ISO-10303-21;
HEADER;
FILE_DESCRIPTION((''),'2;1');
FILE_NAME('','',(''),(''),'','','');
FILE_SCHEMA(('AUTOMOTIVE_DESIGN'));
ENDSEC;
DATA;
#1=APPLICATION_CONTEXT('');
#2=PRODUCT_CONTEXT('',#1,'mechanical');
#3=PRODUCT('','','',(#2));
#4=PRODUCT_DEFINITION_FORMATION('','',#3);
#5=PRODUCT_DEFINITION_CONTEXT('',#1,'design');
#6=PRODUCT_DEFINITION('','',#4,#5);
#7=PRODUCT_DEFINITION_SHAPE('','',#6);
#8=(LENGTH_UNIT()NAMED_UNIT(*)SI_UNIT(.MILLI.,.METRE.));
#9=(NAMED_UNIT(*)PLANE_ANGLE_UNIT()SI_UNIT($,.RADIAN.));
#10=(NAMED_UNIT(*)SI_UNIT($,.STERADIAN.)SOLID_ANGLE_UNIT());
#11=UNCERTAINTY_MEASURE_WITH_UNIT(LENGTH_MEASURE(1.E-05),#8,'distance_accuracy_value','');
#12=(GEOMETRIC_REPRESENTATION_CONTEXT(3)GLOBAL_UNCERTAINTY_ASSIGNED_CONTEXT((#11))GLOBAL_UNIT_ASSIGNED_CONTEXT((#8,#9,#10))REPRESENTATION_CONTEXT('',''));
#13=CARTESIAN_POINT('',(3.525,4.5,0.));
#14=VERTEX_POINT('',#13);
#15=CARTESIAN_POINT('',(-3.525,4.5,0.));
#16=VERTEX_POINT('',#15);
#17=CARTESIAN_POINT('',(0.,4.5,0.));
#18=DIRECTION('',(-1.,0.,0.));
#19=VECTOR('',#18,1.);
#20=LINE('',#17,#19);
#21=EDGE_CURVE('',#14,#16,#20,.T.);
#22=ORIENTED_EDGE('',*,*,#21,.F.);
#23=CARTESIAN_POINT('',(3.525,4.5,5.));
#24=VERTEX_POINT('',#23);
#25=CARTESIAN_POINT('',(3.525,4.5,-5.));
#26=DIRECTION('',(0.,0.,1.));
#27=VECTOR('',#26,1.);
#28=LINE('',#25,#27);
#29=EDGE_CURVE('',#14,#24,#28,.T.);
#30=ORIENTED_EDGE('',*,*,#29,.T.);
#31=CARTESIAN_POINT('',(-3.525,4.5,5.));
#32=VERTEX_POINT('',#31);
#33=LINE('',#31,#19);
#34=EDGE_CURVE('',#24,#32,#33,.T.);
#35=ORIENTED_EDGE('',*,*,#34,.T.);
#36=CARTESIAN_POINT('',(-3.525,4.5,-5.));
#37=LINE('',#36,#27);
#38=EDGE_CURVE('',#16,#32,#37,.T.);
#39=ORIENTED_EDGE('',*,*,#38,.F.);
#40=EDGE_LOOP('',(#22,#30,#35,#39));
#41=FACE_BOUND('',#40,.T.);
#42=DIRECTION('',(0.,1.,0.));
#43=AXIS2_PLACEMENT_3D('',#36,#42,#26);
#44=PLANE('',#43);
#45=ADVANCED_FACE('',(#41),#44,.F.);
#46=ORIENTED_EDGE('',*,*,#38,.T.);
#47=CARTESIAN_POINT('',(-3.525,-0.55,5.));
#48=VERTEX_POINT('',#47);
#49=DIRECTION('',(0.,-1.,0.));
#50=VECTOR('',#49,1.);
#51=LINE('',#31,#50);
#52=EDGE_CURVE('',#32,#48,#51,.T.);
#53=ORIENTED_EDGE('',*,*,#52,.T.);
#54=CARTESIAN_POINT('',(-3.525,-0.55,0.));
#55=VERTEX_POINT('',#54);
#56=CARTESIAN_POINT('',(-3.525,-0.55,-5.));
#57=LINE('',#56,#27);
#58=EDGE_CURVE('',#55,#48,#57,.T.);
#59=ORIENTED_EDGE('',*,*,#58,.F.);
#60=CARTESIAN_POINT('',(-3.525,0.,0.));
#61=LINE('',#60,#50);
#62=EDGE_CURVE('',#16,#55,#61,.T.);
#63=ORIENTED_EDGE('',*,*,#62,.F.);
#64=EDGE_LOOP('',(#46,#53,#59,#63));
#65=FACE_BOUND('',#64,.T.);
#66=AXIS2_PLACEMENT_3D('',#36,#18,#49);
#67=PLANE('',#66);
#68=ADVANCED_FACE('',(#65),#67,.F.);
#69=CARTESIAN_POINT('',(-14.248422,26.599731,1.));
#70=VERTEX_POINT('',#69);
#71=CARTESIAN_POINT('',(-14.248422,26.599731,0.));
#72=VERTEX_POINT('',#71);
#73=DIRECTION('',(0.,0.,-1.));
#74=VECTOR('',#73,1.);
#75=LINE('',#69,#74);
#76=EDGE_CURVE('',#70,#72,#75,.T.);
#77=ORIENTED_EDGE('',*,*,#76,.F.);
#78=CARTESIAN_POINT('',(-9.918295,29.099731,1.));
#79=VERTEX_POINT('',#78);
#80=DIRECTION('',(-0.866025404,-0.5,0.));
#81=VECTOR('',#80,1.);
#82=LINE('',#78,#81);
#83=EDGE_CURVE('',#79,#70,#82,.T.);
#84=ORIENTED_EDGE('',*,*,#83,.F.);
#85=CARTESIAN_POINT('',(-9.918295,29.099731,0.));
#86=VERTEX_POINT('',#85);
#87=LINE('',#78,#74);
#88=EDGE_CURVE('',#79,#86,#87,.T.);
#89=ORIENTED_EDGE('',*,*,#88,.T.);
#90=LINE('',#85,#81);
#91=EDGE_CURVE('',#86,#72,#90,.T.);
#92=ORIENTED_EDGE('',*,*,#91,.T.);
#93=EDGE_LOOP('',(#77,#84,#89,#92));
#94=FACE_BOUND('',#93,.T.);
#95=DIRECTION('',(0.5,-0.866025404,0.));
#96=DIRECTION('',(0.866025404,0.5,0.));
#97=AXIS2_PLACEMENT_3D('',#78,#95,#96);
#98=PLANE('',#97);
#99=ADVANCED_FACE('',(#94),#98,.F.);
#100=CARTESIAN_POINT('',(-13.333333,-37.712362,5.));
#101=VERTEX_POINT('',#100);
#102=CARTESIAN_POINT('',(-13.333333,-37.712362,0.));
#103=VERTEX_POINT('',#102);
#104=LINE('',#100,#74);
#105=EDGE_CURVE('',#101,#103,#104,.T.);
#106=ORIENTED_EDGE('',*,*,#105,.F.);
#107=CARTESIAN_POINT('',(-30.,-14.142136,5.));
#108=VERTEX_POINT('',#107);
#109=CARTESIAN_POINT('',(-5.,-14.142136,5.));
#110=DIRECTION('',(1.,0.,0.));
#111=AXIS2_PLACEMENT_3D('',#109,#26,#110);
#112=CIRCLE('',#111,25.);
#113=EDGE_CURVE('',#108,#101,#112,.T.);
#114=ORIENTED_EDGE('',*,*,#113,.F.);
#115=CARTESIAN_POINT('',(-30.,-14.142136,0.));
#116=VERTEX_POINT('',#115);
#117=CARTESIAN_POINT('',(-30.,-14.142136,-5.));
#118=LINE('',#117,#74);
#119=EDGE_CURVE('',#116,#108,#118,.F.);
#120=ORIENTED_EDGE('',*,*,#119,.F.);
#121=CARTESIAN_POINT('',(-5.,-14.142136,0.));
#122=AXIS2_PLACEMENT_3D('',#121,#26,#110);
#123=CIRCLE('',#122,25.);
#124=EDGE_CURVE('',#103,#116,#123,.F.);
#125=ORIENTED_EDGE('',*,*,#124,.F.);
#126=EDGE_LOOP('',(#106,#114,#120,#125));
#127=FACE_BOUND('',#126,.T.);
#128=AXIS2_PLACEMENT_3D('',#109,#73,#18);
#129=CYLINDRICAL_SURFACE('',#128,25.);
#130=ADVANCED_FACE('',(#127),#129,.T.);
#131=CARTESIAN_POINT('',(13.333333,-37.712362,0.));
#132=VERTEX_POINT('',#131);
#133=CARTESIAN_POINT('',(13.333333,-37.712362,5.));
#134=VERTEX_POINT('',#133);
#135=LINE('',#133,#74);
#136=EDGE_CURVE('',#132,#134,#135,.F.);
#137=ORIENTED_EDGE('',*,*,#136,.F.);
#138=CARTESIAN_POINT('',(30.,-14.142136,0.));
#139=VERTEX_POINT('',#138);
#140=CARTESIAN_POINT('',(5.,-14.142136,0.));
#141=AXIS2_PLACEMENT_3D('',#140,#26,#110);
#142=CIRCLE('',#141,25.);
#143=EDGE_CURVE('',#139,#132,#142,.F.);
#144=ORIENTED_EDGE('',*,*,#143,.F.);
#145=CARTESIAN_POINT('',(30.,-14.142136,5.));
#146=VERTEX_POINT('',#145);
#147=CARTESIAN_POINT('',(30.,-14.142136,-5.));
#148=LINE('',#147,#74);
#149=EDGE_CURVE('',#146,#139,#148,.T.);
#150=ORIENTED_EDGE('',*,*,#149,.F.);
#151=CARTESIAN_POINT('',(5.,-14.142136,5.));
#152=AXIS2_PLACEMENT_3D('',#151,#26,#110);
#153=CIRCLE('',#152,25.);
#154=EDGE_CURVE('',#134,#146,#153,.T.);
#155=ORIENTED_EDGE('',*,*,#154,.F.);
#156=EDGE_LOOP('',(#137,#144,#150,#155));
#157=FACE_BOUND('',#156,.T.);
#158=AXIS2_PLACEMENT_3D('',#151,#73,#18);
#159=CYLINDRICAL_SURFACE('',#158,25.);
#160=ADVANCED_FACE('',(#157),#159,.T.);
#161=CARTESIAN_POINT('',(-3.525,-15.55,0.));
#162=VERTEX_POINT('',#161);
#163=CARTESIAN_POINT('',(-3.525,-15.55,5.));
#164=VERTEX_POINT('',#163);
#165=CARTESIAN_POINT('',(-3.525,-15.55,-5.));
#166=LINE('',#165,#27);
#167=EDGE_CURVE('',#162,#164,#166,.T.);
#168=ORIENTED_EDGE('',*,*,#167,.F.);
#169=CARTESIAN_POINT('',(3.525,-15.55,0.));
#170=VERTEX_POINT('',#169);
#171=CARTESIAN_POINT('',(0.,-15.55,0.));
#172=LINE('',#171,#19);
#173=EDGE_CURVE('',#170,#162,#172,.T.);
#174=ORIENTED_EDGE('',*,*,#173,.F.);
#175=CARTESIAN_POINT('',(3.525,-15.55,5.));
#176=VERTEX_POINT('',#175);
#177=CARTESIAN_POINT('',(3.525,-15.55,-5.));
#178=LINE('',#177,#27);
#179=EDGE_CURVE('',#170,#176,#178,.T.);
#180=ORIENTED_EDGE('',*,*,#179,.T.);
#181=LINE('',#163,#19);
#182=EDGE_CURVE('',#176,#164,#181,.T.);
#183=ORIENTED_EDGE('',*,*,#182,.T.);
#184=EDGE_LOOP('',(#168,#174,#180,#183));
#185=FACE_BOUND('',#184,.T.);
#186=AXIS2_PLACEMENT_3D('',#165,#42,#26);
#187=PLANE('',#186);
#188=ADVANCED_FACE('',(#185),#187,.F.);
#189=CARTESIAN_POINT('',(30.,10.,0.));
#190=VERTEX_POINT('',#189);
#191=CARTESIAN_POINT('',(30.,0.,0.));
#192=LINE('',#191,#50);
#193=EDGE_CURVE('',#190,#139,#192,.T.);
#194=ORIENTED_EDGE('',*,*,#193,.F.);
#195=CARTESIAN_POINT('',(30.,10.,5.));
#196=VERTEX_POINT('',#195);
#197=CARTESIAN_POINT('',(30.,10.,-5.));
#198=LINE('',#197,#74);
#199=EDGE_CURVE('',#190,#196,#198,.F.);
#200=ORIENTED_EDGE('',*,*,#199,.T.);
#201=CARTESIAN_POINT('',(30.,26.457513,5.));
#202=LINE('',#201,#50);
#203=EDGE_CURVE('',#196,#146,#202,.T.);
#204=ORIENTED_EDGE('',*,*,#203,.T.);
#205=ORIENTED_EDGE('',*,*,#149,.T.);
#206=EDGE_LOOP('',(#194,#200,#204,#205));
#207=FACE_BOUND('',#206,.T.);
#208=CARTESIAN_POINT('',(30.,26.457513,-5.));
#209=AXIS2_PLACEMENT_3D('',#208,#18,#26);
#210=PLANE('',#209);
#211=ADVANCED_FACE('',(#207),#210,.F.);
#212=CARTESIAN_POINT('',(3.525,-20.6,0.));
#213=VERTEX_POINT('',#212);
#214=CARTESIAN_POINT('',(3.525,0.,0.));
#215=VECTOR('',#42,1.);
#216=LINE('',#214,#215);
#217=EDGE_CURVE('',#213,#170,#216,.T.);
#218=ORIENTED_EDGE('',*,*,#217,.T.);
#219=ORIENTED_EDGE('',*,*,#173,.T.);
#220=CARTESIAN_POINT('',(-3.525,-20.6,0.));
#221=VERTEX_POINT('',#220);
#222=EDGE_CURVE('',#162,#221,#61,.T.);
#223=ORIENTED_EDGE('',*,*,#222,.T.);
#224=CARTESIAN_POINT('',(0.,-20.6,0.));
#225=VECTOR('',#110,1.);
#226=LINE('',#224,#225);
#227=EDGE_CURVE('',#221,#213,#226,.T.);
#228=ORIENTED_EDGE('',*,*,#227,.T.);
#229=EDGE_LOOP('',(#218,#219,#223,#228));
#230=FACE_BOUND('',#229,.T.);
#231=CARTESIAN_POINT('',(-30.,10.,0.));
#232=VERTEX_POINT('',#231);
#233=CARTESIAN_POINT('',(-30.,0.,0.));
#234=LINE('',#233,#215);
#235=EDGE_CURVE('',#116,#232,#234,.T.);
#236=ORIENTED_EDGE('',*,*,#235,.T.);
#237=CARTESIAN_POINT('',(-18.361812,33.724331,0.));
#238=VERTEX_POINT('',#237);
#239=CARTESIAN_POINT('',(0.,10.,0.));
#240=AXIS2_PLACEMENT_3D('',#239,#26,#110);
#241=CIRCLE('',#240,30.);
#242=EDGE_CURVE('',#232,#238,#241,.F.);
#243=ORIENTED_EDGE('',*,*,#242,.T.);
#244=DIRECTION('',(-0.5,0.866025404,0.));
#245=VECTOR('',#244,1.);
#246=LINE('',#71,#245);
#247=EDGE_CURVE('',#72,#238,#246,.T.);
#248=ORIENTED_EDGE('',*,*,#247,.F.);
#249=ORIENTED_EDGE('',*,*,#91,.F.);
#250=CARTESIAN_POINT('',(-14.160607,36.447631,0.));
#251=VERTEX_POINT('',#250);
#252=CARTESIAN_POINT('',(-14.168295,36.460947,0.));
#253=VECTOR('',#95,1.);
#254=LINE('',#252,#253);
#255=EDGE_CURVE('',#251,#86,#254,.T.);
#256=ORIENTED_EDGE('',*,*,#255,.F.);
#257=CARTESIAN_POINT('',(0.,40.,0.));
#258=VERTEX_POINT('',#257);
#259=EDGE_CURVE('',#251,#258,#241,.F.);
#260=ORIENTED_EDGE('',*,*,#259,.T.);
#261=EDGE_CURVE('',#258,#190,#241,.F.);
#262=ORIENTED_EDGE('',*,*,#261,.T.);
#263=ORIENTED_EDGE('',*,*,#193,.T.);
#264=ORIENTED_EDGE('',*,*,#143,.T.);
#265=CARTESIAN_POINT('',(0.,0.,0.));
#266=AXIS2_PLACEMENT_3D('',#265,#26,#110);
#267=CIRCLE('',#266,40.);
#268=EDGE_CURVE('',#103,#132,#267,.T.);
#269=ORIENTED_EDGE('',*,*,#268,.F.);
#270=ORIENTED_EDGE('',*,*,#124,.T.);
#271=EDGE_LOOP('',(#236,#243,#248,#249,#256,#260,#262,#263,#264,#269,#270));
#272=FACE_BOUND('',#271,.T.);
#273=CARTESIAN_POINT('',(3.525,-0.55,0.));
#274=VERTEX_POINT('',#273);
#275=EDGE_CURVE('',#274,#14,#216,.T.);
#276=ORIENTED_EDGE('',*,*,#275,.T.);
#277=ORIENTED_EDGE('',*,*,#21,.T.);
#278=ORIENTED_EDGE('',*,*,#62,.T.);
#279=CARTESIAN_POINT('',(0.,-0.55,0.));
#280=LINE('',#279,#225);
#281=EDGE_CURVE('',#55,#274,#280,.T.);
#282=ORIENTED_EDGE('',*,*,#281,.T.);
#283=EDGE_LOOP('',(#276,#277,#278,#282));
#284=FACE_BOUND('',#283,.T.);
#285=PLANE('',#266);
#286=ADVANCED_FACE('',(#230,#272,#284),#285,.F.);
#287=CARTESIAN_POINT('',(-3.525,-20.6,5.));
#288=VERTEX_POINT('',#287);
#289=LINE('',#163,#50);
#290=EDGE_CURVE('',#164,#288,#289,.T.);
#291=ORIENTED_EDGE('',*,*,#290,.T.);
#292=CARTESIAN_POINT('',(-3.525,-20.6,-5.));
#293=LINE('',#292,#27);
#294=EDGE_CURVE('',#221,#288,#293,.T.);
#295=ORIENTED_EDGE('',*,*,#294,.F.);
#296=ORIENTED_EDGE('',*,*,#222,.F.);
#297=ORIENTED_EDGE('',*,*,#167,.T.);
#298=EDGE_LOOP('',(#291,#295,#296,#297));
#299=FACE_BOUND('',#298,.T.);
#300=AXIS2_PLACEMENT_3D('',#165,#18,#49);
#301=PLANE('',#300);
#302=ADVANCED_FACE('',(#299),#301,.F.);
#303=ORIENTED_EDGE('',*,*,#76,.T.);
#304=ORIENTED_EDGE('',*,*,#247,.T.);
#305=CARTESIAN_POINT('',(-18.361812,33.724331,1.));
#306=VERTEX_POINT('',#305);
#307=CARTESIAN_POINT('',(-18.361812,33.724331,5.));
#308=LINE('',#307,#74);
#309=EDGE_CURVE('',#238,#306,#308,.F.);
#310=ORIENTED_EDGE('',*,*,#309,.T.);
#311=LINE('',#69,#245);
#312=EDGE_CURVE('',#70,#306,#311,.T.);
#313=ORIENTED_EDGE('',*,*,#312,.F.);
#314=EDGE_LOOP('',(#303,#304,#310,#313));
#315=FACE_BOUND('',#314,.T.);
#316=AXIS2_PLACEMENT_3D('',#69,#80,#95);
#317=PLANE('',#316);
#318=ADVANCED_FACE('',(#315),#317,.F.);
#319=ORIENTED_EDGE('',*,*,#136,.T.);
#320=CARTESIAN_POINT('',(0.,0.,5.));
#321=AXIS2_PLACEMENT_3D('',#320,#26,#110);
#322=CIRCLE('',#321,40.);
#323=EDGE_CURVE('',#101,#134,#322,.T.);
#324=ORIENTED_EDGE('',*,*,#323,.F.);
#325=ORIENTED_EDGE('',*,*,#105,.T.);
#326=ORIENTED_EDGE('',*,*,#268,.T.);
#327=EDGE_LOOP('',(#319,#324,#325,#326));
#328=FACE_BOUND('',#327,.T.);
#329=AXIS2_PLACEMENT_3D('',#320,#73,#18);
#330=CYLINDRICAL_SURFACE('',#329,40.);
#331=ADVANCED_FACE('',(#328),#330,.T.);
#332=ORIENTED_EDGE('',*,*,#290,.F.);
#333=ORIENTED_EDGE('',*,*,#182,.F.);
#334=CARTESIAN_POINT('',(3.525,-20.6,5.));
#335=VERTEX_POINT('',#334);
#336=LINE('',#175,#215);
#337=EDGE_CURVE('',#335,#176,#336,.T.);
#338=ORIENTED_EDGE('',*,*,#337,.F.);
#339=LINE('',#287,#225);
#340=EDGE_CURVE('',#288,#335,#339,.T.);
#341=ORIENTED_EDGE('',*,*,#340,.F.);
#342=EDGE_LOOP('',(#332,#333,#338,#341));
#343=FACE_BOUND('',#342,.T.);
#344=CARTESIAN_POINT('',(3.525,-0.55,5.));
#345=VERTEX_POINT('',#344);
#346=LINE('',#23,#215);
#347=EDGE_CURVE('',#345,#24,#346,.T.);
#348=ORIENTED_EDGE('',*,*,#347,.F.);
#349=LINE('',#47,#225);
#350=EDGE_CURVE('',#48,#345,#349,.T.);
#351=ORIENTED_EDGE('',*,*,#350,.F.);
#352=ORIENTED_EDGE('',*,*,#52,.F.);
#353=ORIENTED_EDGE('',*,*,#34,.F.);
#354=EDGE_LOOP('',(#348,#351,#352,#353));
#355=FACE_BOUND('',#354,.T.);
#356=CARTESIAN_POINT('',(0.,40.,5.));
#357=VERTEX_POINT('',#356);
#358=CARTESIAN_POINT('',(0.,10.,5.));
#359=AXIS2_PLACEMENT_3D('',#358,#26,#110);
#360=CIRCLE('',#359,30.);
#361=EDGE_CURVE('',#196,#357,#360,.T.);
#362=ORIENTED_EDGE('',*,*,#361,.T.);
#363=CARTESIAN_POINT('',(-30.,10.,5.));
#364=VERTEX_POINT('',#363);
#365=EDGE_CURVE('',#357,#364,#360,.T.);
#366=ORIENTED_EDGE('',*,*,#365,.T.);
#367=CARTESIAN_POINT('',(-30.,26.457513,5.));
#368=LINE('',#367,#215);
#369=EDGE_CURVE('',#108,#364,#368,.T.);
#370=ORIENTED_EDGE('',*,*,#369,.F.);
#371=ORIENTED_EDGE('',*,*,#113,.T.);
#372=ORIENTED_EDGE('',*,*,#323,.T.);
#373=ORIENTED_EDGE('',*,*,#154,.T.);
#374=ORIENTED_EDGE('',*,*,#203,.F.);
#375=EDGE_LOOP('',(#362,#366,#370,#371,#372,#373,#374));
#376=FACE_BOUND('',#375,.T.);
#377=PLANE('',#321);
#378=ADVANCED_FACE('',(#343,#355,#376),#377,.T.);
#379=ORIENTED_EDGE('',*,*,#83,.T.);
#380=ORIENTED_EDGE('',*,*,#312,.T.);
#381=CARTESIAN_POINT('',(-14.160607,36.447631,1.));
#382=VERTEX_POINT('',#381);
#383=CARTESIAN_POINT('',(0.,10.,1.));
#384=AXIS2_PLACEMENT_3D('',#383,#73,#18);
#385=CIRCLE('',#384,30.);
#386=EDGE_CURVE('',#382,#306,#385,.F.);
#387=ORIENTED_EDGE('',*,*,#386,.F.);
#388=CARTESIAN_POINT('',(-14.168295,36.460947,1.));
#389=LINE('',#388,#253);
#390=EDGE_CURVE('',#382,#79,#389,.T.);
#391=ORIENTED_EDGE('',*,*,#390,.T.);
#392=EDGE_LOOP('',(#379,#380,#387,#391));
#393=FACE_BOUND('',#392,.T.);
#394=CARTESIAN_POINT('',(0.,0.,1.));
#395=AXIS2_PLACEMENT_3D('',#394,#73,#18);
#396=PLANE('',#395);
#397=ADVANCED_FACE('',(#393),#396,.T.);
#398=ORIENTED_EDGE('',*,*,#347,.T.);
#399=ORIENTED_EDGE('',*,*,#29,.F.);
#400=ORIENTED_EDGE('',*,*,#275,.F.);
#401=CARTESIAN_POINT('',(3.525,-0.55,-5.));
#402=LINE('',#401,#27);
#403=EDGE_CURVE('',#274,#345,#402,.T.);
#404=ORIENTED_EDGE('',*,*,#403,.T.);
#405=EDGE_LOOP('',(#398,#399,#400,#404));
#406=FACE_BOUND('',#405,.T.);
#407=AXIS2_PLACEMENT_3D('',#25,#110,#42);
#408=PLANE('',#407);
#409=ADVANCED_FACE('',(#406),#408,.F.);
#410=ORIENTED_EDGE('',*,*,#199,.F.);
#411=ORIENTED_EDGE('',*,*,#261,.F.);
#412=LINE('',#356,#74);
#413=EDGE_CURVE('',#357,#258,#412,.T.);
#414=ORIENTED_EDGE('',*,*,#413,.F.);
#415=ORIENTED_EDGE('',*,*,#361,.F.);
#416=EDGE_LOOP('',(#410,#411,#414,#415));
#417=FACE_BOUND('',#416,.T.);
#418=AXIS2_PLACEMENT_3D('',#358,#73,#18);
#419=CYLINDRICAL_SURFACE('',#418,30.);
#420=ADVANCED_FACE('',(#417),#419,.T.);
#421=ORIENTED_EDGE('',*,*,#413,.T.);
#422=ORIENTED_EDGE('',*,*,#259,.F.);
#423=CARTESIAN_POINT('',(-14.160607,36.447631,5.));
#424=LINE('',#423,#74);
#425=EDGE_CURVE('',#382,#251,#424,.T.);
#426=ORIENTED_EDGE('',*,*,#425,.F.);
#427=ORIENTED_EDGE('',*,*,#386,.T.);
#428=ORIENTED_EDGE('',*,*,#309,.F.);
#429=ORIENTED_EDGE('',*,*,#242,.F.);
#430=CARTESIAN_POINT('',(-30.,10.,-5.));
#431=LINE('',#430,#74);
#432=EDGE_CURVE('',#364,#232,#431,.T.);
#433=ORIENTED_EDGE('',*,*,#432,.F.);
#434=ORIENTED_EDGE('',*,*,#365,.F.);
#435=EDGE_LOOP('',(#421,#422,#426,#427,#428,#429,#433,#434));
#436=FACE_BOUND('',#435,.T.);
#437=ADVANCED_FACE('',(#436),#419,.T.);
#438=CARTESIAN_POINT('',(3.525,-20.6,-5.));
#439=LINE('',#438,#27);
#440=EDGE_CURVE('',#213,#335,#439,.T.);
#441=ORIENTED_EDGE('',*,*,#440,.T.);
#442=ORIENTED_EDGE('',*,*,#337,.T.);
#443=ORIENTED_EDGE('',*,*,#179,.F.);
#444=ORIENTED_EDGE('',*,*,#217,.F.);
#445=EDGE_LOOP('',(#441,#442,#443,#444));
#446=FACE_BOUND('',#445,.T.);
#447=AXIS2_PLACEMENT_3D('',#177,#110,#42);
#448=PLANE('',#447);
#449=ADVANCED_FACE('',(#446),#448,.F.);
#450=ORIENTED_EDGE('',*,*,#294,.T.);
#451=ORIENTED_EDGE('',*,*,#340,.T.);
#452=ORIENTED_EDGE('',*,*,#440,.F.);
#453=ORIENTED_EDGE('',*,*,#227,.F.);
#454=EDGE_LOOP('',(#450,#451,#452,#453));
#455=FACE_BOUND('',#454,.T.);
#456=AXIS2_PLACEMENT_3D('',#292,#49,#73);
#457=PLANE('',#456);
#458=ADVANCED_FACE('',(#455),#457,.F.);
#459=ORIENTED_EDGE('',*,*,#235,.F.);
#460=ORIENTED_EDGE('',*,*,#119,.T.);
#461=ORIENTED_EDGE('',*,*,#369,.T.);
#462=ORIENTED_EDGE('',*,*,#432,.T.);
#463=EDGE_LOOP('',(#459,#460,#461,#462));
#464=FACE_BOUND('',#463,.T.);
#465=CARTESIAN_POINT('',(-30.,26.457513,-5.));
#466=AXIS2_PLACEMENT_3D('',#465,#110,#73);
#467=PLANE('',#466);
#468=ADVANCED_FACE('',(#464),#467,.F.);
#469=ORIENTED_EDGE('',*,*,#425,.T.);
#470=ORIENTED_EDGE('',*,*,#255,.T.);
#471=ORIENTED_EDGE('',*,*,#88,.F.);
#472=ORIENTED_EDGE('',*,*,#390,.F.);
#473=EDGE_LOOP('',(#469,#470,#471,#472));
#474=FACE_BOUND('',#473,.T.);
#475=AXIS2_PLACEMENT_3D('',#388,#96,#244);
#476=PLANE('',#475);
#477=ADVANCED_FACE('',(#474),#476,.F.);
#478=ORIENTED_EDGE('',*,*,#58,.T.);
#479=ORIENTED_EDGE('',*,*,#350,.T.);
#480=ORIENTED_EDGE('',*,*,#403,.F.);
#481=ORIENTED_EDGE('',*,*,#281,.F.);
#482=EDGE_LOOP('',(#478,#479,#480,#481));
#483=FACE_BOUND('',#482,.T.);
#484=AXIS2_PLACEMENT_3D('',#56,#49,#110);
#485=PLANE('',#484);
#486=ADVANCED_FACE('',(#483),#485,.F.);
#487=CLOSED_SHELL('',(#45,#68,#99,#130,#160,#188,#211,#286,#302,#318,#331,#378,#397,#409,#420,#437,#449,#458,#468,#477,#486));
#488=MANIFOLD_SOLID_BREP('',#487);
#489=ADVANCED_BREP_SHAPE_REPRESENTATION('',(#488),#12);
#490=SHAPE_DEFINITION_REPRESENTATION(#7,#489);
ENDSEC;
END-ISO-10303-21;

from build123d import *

# Parameters (mm, degrees)
SKETCH1_R           = 40
BOSS_EXTRUDE1_DEPTH = 5
CUT_EXTRUDE3_START  = -10
CUT_EXTRUDE3_DEPTH  = 10
FILLET1_R           = 30
FILLET2_R           = 25
SKETCH14_W          = 7.05
SKETCH14_H          = 5.05
CUT_EXTRUDE4_DEPTH  = 10
CUT_EXTRUDE5_START  = -1
CUT_EXTRUDE5_DEPTH  = 1


# Read off the part's stored shape, not the designer's step: Cut-Extrude5
with BuildPart() as part:
    # Sketch1 → Boss-Extrude1 (new body)
    with BuildSketch(Plane.XY):
        Circle(SKETCH1_R)
    extrude(amount=BOSS_EXTRUDE1_DEPTH)

    # Sketch10 → Cut-Extrude3 (cut)
    with BuildSketch(Plane.XY.offset(5).offset(CUT_EXTRUDE3_START)):
        with BuildLine():
            Line((-30, 26.457513111), (-30, -26.457513111))
            ThreePointArc((-30, -26.457513111), (-40, 0), (-30, 26.457513111))
        make_face()
        with BuildLine():
            Line((30, 26.457513111), (30, -26.457513111))
            ThreePointArc((30, -26.457513111), (40, 0), (30, 26.457513111))
        make_face()
    extrude(amount=CUT_EXTRUDE3_DEPTH, mode=Mode.SUBTRACT)

    # Fillet1
    fillet1_edges = [part.edges().sort_by_distance(p)[0] for p in [
        (-30, 26.457513111, 2.5),
        (30, 26.457513111, 2.5),
    ]]
    fillet(fillet1_edges, radius=FILLET1_R - 0.0001)  # a hair under: the kernel refuses the full size

    # Fillet2
    fillet2_edges = [part.edges().sort_by_distance(p)[0] for p in [
        (-30, -26.457513111, 2.5),
        (30, -26.457513111, 2.5),
    ]]
    fillet(fillet2_edges, radius=FILLET2_R)

    # Sketch14 → Cut-Extrude4 (cut)
    with BuildSketch(Plane.XY.offset(5)):
        with Locations((0, 1.975)):
            Rectangle(SKETCH14_W, SKETCH14_H)
        with Locations((0, -18.075)):
            Rectangle(SKETCH14_W, SKETCH14_H)
    extrude(amount=-CUT_EXTRUDE4_DEPTH, mode=Mode.SUBTRACT)

    # Cut-Extrude5 outline → Cut-Extrude5 (cut)
    with BuildSketch(Plane(origin=(0, 0, 0), x_dir=(-1, 0, 0), z_dir=(0, 0, -1)).offset(CUT_EXTRUDE5_START)):
        Polygon((15.056868042, 38), (14.160607491, 36.447631189), (9.918295379, 29.099731068), (14.248422398, 26.599731068), (18.36181188, 33.724330643), (20, 36.5617557), (20, 38), align=None)
    extrude(amount=CUT_EXTRUDE5_DEPTH, mode=Mode.SUBTRACT)


solid = part.part
